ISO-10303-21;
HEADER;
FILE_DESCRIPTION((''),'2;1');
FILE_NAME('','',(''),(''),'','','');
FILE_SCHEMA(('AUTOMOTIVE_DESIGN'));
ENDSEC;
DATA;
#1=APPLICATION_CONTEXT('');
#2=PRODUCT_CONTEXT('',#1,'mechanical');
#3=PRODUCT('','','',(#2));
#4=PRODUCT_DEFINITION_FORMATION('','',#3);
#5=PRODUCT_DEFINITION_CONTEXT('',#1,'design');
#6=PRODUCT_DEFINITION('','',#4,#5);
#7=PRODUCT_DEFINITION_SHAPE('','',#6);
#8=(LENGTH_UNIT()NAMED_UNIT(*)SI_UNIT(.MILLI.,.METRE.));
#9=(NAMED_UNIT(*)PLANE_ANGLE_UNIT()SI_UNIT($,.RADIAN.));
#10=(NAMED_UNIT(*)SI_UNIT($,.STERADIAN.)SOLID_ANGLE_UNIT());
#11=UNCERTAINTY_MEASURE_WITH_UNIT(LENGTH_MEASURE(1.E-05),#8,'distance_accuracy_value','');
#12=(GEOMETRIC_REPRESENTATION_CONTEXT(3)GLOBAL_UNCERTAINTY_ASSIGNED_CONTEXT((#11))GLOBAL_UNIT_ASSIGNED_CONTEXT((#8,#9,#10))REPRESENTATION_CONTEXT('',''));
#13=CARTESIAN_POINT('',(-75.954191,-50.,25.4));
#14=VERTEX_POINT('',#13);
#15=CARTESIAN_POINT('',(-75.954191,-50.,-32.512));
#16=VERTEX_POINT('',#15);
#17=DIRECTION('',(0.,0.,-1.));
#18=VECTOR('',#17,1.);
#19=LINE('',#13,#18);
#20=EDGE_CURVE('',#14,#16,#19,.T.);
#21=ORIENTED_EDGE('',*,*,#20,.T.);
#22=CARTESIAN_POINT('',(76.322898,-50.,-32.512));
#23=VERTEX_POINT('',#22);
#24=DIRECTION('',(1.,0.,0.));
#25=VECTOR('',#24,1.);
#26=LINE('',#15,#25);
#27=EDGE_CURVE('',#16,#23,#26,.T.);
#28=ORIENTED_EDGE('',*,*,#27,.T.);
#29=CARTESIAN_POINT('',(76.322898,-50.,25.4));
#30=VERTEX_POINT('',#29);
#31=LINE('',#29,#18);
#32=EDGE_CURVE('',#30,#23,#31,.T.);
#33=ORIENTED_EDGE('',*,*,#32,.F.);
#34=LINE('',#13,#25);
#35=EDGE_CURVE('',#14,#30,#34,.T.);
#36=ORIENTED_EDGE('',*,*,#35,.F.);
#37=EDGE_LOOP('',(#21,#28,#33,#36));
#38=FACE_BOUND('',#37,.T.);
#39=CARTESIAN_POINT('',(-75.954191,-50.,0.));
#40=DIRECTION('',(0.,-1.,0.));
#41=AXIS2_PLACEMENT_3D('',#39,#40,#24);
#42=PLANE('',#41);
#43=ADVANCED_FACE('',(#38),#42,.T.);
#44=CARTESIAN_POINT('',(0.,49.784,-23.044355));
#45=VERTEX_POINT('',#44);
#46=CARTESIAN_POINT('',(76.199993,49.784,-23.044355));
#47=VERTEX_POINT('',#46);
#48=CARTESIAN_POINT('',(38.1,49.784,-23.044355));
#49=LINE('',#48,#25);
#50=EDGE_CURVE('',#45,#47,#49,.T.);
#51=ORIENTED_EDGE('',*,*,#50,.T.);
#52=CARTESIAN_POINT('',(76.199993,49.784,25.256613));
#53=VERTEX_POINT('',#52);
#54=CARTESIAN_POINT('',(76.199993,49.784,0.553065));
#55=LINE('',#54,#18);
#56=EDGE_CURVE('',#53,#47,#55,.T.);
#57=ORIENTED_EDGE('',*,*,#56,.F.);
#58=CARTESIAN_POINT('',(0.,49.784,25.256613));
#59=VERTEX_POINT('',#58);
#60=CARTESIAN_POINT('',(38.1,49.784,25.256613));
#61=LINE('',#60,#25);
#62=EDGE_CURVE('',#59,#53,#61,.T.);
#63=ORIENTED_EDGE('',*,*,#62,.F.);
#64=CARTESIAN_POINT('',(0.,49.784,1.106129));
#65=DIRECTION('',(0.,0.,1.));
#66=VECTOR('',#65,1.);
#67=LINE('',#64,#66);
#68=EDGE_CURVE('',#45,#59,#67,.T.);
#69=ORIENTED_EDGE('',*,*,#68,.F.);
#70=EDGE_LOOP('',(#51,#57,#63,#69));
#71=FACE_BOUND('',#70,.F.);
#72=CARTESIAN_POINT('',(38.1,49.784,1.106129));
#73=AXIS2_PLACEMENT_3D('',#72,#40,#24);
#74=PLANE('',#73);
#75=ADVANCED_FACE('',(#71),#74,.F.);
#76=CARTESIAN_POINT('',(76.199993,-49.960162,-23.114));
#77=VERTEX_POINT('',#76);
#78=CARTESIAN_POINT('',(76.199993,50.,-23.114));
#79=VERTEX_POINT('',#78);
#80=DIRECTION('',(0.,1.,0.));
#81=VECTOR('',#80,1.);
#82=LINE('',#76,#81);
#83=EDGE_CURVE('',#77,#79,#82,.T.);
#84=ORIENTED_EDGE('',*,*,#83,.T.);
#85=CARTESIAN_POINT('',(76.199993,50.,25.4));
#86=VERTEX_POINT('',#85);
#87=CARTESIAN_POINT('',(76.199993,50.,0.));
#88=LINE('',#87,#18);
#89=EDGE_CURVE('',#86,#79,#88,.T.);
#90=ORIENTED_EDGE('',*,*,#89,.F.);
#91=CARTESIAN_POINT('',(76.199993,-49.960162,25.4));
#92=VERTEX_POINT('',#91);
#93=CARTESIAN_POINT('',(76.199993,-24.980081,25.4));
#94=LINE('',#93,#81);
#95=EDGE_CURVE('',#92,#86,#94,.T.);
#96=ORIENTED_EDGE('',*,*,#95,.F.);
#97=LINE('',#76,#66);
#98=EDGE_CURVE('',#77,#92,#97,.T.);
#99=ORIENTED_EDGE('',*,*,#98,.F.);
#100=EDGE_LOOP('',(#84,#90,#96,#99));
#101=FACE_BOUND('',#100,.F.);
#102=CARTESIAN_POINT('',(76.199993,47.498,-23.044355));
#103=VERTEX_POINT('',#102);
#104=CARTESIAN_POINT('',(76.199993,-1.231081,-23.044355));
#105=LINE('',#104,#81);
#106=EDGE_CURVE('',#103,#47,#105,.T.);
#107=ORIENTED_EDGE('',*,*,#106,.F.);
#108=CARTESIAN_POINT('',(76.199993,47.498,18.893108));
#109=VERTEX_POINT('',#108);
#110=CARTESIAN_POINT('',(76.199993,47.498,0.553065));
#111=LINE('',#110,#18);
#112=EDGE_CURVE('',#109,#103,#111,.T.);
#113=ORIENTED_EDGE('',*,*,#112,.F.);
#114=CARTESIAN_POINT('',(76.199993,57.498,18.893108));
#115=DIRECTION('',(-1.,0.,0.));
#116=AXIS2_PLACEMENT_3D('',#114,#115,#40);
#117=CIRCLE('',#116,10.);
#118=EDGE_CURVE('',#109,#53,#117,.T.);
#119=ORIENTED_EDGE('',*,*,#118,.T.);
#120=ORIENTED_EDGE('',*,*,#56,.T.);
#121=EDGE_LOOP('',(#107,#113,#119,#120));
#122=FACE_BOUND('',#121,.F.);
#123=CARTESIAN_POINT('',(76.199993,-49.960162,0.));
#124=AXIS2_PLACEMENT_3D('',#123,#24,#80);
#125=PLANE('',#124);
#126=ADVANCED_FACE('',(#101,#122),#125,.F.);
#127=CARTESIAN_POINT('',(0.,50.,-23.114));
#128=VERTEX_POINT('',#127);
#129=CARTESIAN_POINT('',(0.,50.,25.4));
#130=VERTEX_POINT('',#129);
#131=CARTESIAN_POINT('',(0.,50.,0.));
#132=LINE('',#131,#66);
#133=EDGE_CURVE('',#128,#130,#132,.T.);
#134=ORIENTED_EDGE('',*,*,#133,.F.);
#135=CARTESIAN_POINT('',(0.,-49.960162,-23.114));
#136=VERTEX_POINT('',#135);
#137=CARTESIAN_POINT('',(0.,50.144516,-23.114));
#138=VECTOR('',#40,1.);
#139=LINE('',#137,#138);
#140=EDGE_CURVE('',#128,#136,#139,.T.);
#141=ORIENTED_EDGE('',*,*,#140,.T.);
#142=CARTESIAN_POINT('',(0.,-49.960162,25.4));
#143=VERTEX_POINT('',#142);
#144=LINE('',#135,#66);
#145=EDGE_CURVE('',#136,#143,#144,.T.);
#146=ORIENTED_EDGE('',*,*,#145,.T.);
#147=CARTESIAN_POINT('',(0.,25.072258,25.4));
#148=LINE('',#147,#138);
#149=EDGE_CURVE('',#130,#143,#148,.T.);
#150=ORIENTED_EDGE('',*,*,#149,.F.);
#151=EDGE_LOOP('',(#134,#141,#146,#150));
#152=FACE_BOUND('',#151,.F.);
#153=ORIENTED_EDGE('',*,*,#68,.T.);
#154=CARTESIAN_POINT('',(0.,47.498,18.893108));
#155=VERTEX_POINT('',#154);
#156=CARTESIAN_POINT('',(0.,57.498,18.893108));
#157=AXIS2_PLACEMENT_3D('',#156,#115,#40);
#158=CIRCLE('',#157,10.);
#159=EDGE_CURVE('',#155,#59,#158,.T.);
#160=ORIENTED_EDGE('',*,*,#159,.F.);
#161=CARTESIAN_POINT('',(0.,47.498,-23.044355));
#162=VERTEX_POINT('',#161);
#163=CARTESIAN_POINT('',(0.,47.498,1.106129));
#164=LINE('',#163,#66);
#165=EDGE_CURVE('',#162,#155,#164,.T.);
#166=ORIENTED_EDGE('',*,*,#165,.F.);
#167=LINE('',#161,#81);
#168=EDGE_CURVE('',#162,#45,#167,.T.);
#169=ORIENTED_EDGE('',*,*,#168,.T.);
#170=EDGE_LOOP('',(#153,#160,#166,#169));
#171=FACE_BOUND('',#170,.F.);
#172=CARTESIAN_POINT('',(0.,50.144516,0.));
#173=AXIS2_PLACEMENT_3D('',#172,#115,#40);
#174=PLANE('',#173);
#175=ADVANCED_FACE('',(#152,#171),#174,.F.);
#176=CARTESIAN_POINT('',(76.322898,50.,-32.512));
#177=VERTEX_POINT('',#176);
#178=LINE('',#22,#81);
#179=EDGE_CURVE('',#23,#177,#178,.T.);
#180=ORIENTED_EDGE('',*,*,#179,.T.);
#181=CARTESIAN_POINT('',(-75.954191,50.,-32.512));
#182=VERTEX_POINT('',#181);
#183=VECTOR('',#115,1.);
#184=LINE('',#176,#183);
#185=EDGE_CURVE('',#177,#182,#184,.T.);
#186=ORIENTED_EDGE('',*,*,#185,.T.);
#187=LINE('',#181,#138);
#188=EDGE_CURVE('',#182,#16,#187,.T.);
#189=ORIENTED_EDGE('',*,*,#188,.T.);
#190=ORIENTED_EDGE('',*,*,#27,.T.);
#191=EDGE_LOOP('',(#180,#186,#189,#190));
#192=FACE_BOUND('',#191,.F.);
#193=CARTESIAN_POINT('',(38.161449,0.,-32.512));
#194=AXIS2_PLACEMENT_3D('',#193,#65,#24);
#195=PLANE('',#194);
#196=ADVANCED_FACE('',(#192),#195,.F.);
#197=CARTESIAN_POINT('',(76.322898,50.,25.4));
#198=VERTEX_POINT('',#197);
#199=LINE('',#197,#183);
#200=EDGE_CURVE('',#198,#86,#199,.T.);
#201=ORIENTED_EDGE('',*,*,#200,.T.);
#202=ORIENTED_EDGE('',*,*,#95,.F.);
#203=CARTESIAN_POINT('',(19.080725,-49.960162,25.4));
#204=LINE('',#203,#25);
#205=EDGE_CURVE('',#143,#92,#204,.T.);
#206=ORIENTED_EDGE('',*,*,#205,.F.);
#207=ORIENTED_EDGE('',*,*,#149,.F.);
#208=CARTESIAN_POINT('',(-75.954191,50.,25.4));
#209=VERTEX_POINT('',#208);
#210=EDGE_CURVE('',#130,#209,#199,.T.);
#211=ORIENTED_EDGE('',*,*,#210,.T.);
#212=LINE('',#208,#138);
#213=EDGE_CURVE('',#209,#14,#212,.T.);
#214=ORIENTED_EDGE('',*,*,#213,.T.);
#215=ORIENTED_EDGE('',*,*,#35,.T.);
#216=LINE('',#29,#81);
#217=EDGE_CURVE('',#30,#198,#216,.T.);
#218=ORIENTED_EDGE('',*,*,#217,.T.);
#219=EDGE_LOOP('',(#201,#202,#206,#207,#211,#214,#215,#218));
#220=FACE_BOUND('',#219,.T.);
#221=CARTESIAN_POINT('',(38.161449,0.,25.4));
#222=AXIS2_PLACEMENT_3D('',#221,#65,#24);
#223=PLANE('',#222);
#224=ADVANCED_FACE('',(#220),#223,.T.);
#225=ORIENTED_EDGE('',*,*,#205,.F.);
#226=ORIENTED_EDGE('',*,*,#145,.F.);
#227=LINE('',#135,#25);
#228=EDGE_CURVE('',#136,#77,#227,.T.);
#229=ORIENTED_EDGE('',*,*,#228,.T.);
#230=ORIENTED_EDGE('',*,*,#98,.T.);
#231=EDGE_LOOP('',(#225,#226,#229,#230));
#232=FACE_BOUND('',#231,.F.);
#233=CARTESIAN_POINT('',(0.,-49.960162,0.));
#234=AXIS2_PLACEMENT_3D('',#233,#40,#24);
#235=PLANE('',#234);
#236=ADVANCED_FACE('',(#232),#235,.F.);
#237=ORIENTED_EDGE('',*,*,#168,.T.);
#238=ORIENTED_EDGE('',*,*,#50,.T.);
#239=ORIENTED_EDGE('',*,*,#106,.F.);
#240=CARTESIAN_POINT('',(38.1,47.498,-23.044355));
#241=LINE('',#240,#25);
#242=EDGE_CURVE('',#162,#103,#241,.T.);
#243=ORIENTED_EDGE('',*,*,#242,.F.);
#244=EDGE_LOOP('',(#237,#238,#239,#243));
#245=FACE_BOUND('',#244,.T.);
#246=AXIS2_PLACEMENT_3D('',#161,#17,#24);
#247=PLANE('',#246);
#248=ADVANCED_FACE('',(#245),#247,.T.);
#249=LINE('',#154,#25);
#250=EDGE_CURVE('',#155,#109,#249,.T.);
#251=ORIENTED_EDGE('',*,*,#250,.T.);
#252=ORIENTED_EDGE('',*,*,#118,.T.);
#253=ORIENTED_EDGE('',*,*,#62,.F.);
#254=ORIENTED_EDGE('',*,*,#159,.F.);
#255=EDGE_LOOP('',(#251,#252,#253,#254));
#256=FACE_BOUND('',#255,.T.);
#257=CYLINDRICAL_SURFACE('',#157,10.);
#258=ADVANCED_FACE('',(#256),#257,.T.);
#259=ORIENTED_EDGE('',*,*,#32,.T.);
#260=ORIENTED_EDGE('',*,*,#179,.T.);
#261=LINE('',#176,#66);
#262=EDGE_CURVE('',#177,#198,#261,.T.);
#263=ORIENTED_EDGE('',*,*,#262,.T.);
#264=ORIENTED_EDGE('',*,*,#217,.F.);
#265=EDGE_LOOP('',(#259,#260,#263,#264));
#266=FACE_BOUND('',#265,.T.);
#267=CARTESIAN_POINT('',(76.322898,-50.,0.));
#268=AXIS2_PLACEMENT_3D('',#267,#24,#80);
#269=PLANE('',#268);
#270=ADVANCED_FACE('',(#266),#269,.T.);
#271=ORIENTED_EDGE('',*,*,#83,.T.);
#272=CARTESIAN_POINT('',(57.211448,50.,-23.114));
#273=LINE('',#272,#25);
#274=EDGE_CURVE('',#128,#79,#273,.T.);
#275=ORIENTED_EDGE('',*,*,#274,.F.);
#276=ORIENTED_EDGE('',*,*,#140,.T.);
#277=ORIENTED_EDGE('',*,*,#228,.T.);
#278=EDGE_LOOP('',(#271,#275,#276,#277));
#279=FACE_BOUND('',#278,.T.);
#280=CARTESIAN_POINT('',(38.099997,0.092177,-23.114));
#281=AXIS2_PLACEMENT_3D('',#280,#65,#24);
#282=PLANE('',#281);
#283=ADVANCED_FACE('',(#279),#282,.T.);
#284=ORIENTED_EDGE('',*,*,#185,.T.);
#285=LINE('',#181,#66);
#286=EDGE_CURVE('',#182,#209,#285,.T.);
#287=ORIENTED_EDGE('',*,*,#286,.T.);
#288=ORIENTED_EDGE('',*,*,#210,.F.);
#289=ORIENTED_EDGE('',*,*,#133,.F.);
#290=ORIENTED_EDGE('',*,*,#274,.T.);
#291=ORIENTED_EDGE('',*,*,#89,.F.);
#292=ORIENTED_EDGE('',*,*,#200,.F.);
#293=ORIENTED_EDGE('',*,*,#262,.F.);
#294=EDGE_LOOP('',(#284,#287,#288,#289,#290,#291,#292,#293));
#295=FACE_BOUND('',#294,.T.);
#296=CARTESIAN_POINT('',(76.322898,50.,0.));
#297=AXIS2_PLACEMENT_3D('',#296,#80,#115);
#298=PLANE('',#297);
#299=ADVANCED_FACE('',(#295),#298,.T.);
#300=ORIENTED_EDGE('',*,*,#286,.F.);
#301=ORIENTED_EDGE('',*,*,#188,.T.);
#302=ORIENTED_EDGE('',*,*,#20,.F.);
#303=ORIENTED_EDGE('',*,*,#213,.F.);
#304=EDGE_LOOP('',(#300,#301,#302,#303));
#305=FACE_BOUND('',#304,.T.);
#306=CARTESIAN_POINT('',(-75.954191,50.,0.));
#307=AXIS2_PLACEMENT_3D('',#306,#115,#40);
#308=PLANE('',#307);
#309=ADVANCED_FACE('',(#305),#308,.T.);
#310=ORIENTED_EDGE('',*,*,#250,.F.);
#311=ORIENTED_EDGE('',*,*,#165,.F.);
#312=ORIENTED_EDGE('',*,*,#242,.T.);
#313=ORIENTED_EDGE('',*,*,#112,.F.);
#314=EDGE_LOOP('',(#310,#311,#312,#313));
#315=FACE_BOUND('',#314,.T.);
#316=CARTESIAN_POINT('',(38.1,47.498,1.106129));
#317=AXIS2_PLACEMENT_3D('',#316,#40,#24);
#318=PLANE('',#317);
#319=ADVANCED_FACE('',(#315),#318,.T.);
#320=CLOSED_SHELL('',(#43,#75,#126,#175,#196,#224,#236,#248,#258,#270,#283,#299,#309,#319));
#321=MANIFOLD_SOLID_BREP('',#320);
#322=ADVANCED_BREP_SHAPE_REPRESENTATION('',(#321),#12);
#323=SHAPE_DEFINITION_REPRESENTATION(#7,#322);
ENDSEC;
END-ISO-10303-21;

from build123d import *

# Parameters (mm, degrees)
F1_DEPTH      = 25.4
F1_DEPTH_BACK = 32.512
F3_DEPTH      = 39.37
F3_DEPTH_BACK = 23.114
F6_START      = -47.498
F5_W          = 76.2000009418
F5_H          = 48.3009684831
F6_DEPTH      = 2.286
F7_T1_DEPTH   = 76.1999934912


# Not quite as in the source:
# - a fillet or chamfer that OpenCascade refuses, or shapes differently, is made with other operations: its cross-section is extruded or revolved along the edge and cut away or added


with BuildPart() as f1:
    # F0 (on Top) → F1 (new body, two sides)
    with BuildSketch(Plane.XY) as f1_sk:
        Polygon((0, 0), (0, -50), (76.3228982687, -50), (76.3228982687, 50), (0, 50), align=None)
        Polygon((-75.9541913867, -50), (0, -50), (0, 0), (0, 50), (-75.9541913867, 50), align=None)
    extrude(amount=F1_DEPTH)
    extrude(f1_sk.sketch, amount=-F1_DEPTH_BACK)


with BuildPart() as f3:
    # F2 (on Top) → F3 (new body, two sides)
    with BuildSketch(Plane.XY) as f3_sk:
        Polygon((0, 50.1445159316), (0, 0), (0, -49.9601624906), (76.1999934912, -49.9601624906), (76.1999934912, 50.1445159316), align=None)
    extrude(amount=F3_DEPTH)
    extrude(f3_sk.sketch, amount=-F3_DEPTH_BACK)


with BuildPart() as f1_1:
    add(f1.part)

    # F4: cut F3
    add(f3.part, mode=Mode.SUBTRACT)

    # F5 (on Front) → F6 (join)
    with BuildSketch(Plane.XZ.offset(F6_START)):
        with Locations((38.1000004709, 1.1061290279)):
            Rectangle(F5_W, F5_H)
    extrude(amount=-F6_DEPTH)

    # F7: fillet of radius 10 on 1 edges, made by hand

    # F7_s2 → F7_t1 (cut)
    with BuildSketch(Plane.YZ):
        with BuildLine():
            ThreePointArc((47.498, 18.8931076318), (48.0868364163, 22.2739359327), (49.784, 25.2566132694))
            Line((49.784, 25.2566132694), (47.498, 25.2566132694))
            Line((47.498, 25.2566132694), (47.498, 18.8931076318))
        make_face()
    extrude(amount=F7_T1_DEPTH, mode=Mode.SUBTRACT)


solid = f1_1.part
